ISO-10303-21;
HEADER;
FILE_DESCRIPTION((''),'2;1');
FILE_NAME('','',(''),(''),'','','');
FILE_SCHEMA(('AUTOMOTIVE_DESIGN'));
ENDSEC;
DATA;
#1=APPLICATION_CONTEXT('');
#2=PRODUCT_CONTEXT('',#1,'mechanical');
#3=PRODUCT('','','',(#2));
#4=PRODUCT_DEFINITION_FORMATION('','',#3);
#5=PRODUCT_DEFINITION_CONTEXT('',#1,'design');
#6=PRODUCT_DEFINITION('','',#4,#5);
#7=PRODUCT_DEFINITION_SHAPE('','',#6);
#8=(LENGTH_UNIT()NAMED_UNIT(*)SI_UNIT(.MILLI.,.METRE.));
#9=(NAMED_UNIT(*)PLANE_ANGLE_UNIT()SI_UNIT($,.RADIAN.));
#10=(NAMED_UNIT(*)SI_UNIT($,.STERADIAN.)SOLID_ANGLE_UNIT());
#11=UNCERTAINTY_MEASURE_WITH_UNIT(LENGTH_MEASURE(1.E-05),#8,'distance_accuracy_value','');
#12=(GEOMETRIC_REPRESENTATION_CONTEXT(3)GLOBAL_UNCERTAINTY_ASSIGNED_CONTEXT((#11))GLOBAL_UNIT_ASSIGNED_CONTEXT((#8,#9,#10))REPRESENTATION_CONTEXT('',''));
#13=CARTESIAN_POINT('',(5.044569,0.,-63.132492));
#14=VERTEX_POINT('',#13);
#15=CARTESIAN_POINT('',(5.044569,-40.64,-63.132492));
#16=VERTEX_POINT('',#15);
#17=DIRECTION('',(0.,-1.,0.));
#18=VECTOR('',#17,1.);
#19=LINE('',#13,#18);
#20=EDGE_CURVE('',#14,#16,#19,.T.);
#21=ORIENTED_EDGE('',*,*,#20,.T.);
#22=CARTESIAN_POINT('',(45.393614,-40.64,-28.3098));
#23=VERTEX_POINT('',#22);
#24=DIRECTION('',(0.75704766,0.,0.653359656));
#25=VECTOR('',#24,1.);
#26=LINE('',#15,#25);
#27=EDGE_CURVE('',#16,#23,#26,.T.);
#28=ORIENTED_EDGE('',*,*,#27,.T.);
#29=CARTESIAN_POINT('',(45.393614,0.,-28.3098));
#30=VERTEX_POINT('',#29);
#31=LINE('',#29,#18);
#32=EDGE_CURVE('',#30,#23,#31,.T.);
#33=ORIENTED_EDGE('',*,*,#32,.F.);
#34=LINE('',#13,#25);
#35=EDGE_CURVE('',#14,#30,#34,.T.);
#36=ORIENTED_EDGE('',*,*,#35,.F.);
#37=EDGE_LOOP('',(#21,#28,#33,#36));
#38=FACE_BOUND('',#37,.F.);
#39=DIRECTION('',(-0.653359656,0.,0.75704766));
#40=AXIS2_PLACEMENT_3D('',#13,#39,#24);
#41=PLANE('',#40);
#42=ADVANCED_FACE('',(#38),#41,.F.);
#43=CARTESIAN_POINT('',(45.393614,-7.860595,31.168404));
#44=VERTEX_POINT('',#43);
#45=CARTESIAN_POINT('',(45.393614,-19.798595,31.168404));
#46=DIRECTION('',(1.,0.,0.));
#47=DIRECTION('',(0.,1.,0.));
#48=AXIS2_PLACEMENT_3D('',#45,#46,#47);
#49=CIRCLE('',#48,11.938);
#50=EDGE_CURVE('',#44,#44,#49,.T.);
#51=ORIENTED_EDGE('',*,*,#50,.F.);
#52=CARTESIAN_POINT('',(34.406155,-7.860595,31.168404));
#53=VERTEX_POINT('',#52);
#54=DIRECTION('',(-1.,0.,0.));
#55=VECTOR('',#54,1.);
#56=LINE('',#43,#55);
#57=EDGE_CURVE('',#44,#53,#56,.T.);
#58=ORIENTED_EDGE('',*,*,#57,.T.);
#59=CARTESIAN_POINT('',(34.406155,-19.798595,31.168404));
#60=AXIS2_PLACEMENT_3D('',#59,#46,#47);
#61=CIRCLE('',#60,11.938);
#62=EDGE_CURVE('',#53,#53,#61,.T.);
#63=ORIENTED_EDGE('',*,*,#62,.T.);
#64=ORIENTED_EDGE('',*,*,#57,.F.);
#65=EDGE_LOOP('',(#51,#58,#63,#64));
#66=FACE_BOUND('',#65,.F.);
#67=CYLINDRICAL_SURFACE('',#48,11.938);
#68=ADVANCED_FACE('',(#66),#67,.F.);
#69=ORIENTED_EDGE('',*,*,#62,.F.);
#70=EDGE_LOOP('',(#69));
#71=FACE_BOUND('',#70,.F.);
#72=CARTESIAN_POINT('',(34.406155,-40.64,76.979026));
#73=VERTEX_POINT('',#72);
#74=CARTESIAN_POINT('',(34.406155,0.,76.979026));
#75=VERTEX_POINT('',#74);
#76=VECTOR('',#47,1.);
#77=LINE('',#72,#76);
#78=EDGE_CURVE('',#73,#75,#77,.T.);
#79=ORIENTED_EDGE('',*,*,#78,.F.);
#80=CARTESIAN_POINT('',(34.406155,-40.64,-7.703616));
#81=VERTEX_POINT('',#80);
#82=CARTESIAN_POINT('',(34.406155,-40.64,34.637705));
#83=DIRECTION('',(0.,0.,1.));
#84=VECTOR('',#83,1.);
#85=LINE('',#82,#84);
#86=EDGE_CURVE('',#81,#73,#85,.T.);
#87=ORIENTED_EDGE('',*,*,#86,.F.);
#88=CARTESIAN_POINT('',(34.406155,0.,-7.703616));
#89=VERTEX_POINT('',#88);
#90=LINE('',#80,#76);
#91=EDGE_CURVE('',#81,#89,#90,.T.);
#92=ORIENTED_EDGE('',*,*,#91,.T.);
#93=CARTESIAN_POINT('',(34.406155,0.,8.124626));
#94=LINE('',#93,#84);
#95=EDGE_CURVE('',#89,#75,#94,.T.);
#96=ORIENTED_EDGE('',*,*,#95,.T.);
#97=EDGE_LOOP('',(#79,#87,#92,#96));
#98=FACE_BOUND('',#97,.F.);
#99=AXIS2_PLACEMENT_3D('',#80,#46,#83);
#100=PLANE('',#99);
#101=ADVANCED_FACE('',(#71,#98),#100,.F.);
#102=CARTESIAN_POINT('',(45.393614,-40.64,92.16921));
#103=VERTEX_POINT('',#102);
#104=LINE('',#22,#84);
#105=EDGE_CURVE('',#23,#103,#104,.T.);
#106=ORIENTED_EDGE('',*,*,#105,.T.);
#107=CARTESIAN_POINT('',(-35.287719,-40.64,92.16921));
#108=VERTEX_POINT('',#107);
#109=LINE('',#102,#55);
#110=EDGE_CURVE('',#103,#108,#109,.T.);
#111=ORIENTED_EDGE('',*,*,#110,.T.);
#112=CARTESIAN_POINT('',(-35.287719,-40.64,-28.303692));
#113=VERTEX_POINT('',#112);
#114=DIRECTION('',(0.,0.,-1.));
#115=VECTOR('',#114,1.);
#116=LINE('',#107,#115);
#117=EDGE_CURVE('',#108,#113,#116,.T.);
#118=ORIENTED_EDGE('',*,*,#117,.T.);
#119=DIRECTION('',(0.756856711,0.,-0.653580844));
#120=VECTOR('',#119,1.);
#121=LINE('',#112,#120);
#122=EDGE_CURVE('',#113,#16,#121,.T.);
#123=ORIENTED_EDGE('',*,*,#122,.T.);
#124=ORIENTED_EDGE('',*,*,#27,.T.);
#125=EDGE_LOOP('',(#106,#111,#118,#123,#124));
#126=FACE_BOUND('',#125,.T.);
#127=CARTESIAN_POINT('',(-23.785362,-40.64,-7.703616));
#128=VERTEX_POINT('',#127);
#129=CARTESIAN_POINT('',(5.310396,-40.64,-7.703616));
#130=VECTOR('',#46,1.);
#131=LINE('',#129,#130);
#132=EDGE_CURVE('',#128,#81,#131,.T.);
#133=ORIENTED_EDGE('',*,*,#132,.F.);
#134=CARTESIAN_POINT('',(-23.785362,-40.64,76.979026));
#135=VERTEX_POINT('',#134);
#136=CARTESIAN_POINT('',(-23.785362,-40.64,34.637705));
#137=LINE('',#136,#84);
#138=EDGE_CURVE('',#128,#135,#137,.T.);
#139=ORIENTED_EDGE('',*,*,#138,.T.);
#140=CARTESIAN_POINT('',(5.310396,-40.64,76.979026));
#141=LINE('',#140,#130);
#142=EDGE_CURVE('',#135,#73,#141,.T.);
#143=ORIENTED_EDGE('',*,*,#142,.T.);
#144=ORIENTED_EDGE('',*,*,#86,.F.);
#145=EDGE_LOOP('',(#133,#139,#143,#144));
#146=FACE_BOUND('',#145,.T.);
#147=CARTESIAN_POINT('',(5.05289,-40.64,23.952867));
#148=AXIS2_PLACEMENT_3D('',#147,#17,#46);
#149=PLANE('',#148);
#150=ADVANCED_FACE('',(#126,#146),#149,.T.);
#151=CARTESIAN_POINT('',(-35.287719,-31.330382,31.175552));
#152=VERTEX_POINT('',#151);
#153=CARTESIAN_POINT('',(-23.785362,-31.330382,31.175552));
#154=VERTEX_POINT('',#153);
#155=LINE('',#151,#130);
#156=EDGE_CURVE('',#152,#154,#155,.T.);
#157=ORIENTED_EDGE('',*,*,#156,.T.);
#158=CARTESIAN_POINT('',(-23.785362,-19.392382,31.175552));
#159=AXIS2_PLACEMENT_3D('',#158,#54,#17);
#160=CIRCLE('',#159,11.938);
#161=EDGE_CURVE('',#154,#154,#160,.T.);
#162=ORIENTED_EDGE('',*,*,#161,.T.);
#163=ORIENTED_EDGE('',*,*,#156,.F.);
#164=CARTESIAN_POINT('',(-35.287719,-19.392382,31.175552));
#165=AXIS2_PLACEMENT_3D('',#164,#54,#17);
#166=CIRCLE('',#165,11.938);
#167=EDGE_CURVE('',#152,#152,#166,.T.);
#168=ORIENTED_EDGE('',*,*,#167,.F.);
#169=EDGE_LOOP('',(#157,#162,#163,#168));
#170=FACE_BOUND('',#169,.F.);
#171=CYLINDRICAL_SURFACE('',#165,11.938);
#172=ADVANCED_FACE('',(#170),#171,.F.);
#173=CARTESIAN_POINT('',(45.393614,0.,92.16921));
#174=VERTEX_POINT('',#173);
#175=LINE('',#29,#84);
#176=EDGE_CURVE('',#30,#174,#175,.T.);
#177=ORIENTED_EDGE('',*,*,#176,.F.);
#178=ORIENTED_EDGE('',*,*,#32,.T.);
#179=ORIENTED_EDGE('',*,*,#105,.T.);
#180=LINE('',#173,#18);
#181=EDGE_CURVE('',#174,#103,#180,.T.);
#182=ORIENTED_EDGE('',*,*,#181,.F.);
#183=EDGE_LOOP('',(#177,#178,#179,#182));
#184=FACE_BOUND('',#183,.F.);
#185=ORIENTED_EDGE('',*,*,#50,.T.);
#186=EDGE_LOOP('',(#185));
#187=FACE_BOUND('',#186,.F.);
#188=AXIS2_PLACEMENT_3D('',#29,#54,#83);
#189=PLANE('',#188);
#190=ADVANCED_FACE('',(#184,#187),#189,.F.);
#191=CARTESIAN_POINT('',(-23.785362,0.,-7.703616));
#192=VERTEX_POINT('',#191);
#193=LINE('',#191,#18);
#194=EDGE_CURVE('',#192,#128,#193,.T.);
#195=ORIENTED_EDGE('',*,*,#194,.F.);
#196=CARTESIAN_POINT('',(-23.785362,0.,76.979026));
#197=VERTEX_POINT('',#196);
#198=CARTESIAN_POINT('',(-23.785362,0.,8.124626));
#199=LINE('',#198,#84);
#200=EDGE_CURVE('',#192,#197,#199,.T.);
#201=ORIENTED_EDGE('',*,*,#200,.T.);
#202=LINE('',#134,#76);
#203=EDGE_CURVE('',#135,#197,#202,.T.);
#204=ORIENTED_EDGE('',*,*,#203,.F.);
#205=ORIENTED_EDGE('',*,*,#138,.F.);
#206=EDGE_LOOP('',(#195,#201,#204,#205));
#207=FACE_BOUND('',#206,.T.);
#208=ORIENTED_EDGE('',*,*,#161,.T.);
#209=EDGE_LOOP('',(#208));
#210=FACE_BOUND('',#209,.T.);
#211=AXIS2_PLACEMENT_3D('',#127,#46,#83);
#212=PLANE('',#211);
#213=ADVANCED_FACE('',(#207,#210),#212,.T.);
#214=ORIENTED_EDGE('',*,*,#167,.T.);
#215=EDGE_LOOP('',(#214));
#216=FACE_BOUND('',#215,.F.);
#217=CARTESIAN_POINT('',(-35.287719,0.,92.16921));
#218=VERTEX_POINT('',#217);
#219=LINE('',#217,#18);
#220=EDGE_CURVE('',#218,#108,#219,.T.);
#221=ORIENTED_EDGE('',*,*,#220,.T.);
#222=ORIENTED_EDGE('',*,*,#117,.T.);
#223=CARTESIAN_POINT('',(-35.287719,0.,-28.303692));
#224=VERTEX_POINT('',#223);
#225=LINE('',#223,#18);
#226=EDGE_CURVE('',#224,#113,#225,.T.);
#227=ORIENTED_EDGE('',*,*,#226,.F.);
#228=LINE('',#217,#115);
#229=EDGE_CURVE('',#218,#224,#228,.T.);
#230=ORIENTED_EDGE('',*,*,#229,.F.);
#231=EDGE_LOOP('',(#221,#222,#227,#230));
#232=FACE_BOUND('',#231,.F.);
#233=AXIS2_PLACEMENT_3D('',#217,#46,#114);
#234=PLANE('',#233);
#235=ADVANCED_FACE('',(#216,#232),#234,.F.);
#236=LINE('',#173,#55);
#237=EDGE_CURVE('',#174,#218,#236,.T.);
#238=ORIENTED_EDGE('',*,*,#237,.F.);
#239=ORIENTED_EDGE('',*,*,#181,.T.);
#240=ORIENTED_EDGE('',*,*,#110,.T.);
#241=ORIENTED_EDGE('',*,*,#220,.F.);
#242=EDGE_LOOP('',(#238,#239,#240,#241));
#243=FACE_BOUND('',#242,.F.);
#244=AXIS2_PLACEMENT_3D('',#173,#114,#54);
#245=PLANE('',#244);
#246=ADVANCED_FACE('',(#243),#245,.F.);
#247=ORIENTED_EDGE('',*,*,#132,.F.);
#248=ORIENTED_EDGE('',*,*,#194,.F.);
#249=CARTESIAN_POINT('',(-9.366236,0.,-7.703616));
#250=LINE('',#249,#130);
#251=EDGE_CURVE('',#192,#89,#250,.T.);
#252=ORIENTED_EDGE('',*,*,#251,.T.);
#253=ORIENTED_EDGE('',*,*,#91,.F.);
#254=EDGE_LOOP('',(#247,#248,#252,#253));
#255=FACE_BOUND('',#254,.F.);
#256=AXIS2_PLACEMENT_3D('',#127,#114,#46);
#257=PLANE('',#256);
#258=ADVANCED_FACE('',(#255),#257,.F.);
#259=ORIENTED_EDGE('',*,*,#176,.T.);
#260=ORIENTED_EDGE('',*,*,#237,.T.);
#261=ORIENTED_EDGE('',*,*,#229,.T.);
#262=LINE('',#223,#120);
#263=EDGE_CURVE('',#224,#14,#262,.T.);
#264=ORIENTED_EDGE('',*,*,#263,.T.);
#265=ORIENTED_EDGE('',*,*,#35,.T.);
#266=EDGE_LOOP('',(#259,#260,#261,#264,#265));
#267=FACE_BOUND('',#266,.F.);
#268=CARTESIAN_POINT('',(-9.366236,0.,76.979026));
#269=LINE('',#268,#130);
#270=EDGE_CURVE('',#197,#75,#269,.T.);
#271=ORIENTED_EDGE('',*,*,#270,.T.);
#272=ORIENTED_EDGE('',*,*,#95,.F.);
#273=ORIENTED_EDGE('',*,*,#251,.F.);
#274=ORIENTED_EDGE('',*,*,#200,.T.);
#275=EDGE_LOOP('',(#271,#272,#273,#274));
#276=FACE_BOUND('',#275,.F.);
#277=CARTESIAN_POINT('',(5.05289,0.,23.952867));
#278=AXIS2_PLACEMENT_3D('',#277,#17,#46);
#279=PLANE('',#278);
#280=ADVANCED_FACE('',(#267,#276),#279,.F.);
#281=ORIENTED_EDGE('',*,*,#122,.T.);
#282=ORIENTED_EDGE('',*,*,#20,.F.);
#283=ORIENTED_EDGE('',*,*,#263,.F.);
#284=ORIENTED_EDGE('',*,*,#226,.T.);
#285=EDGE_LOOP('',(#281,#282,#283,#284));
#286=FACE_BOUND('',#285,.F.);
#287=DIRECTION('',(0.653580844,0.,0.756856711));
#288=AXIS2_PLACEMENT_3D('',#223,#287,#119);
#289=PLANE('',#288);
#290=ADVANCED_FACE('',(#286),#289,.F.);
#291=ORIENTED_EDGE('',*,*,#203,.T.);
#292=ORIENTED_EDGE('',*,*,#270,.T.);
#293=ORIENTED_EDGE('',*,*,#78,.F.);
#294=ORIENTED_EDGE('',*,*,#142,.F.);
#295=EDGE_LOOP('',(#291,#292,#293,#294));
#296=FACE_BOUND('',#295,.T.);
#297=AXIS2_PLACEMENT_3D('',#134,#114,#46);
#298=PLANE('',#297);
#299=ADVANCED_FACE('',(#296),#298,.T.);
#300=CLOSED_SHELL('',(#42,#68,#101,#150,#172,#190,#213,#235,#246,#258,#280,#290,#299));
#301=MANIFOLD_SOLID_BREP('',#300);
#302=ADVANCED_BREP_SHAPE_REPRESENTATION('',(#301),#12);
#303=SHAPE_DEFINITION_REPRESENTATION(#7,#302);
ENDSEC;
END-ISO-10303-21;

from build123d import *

# Parameters (mm, degrees)
F1_DEPTH = 40.64
F2_W     = 58.1915168336
F2_H     = 84.6826420166
F3_DEPTH = 100.584
F4_DEPTH = 25.4
F5_R     = 11.938
F6_DEPTH = 25.4
F7_R     = 11.938
F8_DEPTH = 25.4


# Not quite as in the source:
# - a feature names something its author has since deleted; it is built from what else it names


with BuildPart() as f1:
    # F0 (on Front) → F1 (new body)
    with BuildSketch(Plane.XZ):
        Polygon((5.0445693985, -63.1324924332), (45.3936140645, -28.3097998209), (45.3936140645, 92.1692103148), (-35.2877192199, 92.1692103148), (-35.2877192199, -28.3036921173), align=None)
    extrude(amount=F1_DEPTH)

    # F2 (on face) → F3 (cut)
    with BuildSketch(Plane.XZ.offset(40.64)):
        with Locations((5.3103963967, 34.6377051901)):
            Rectangle(F2_W, F2_H)
    extrude(amount=-F3_DEPTH, mode=Mode.SUBTRACT)

    # F2 (on face) → F4 (cut)
    with BuildSketch(Plane.XZ.offset(40.64)):
        with Locations((5.3103963967, 34.6377051901)):
            Rectangle(F2_W, F2_H)
    extrude(amount=-F4_DEPTH, mode=Mode.SUBTRACT)

    # F5 (on face) → F6 (cut)
    with BuildSketch(Plane(origin=(-35.2877192199, 0, 0), x_dir=(0, -1, 0), z_dir=(-1, 0, 0))):
        with Locations((19.3923822703, 31.1755515458)):
            Circle(F5_R)
    extrude(amount=-F6_DEPTH, mode=Mode.SUBTRACT)

    # F7 (on face) → F8 (cut)
    with BuildSketch(Plane.YZ.offset(45.3936140645)):
        with Locations((-19.7985949944, 31.1684036463)):
            Circle(F7_R)
    extrude(amount=-F8_DEPTH, mode=Mode.SUBTRACT)


solid = f1.part
